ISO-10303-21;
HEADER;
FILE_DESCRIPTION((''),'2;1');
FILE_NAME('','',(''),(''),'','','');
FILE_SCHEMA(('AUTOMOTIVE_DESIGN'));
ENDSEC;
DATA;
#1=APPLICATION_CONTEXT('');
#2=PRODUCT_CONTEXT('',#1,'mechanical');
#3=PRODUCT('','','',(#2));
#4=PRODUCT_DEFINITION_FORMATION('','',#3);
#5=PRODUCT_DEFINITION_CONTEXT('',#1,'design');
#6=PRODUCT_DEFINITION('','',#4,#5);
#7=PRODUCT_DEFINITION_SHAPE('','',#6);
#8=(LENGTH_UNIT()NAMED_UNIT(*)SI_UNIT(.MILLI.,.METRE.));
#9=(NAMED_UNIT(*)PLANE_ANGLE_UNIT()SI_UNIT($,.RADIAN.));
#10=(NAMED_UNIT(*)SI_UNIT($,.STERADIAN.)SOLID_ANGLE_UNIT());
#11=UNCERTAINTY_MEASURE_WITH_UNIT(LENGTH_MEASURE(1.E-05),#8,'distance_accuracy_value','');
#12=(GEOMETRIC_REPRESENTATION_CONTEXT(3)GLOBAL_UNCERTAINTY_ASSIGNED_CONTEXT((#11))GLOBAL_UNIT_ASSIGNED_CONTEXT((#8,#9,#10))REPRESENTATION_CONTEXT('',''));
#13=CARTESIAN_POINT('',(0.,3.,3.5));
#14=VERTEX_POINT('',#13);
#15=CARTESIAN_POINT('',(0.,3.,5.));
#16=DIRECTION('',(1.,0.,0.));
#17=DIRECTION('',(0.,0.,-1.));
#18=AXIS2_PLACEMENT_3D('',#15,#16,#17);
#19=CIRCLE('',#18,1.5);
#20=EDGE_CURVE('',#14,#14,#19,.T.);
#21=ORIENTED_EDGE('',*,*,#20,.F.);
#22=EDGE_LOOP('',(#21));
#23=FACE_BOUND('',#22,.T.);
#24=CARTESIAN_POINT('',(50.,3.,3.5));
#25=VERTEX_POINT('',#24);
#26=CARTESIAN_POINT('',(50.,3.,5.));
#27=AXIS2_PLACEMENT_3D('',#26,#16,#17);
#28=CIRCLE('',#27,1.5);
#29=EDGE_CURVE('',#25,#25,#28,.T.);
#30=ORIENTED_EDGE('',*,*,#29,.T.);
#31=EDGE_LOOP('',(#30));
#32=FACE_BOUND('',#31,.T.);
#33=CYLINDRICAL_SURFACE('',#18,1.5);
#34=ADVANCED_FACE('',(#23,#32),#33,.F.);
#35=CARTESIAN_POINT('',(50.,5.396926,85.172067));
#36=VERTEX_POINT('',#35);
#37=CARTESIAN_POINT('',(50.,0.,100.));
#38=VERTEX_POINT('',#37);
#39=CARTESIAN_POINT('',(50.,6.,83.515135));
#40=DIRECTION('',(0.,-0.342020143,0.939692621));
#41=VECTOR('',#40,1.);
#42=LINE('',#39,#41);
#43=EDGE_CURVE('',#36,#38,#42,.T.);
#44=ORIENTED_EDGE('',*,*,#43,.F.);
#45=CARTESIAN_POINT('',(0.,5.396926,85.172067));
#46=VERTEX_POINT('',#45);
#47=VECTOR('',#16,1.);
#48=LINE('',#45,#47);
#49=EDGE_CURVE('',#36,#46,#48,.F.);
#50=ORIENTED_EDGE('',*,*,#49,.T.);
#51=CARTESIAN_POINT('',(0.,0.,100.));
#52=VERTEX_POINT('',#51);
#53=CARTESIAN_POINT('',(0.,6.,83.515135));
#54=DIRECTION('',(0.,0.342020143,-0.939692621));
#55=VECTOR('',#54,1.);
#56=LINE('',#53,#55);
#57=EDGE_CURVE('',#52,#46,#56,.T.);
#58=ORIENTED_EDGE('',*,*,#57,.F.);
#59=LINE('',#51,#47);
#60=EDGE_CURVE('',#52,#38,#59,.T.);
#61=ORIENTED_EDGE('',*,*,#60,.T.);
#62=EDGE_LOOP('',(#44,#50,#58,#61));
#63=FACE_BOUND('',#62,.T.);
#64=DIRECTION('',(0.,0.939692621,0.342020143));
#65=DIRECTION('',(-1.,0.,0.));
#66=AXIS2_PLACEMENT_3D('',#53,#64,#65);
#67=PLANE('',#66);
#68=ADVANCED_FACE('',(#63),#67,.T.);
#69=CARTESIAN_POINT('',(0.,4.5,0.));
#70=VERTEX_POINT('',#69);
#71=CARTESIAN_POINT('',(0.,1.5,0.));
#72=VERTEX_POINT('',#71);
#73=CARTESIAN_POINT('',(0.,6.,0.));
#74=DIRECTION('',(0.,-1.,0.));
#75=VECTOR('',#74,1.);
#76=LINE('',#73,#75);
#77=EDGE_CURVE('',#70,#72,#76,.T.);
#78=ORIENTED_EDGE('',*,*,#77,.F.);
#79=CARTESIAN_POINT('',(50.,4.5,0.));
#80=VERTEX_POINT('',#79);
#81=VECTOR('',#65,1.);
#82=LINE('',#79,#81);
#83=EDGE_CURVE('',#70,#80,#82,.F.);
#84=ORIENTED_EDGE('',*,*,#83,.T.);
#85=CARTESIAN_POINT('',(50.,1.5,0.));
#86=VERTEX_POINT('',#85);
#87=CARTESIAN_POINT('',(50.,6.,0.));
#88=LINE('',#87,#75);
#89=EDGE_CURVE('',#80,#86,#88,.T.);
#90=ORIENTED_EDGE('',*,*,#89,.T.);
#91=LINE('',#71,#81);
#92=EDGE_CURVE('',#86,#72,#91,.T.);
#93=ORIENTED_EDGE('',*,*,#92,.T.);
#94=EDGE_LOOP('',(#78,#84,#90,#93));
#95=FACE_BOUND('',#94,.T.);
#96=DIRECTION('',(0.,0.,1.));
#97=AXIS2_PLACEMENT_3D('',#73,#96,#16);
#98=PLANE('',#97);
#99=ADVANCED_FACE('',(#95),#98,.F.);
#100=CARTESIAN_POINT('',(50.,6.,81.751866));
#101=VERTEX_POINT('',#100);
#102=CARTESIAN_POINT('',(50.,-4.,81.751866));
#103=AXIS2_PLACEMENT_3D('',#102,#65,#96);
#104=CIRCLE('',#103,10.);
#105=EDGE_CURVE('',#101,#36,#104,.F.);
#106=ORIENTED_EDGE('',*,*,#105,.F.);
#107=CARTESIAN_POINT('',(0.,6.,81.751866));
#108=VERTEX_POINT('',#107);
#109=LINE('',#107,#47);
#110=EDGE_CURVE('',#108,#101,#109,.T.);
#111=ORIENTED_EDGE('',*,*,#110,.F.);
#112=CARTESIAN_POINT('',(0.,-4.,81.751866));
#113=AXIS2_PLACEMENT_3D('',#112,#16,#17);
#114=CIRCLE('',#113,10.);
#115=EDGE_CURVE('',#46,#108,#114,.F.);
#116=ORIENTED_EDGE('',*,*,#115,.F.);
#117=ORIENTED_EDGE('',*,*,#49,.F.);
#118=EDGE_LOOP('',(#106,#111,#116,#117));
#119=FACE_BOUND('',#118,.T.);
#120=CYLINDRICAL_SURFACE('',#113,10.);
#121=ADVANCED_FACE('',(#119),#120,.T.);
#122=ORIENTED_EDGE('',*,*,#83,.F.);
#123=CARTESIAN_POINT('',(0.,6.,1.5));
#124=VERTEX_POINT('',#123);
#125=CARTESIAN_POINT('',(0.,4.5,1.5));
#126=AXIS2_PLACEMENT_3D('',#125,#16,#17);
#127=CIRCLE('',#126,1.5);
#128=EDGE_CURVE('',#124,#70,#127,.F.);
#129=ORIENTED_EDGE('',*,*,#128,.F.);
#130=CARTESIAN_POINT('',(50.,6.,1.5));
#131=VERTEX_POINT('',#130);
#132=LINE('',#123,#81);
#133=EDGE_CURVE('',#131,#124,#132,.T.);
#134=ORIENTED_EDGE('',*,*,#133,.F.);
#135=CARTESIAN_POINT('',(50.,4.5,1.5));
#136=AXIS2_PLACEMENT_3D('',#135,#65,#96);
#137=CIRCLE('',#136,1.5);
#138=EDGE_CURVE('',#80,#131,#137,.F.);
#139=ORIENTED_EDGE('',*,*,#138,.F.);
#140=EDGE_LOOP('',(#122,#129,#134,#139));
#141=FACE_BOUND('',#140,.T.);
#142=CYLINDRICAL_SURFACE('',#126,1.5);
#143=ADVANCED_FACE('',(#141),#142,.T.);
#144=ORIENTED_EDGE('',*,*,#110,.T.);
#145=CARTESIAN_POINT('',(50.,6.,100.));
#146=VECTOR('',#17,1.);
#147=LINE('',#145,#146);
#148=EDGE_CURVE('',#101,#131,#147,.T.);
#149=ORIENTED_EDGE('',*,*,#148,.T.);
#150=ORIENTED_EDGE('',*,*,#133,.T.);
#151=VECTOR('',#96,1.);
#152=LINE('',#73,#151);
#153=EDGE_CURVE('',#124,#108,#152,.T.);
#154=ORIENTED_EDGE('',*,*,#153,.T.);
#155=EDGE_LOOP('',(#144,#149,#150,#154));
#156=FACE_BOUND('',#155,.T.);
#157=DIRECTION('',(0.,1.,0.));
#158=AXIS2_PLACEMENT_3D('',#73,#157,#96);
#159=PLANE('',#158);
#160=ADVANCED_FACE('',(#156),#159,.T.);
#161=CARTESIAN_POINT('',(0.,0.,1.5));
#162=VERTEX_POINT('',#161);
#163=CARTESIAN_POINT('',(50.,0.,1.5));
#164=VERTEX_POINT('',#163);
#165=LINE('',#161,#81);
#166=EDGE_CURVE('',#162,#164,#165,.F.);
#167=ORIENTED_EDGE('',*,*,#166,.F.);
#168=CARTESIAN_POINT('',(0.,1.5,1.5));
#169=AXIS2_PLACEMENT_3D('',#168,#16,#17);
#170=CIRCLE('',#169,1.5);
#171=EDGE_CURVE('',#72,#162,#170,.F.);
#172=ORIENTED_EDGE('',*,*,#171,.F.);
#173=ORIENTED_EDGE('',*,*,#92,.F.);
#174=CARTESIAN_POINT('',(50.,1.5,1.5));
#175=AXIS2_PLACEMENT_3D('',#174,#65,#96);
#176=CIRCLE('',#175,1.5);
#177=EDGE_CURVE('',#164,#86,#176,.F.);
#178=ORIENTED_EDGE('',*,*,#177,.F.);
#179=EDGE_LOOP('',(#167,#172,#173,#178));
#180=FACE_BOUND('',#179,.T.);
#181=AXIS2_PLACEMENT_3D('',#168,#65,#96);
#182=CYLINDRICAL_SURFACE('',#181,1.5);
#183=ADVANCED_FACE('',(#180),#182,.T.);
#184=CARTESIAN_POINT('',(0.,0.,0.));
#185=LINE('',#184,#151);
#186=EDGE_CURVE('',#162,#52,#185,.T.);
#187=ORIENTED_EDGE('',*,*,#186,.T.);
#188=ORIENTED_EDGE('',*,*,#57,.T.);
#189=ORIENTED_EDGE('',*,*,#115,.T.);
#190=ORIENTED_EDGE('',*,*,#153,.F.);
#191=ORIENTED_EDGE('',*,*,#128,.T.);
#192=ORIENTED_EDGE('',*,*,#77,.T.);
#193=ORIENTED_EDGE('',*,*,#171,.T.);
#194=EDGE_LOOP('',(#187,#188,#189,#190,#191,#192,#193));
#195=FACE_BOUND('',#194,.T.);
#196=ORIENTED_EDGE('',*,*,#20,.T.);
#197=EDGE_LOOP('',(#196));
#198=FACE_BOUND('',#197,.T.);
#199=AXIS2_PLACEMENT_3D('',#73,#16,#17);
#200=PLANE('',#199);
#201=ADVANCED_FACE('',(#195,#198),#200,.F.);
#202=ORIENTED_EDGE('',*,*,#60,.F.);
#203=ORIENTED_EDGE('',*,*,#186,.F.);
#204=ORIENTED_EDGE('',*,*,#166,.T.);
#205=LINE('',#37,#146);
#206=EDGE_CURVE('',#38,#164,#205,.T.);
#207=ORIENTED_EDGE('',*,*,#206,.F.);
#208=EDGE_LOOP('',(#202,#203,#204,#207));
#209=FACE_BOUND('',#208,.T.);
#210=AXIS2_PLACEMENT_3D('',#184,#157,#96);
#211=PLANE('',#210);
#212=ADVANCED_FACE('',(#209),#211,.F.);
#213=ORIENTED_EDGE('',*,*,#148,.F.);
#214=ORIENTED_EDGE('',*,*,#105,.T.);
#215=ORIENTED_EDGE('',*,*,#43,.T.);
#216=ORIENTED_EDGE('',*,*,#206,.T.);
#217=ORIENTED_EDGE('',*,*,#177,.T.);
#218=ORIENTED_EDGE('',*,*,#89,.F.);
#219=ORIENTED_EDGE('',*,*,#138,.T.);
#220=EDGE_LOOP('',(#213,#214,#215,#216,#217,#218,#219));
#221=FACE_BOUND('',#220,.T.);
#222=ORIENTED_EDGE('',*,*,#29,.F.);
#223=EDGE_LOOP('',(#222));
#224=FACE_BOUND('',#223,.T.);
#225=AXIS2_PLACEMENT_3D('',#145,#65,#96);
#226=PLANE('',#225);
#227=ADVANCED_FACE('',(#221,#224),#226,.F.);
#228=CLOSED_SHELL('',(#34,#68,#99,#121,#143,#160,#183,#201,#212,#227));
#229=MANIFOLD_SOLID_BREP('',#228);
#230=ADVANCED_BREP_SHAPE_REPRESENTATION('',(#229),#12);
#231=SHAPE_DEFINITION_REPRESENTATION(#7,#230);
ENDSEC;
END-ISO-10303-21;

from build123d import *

# Parameters (mm, degrees)
SKETCH1_W           = 50
SKETCH1_H           = 100
BOSS_EXTRUDE1_DEPTH = 6
SKETCH2_R           = 1.5
CUT_EXTRUDE1_DEPTH  = 112.964280018
FILLET2_R           = 1.5
CHAMFER1_SIZE2      = 16.484864517
CHAMFER1_SIZE       = 6
FILLET3_R           = 10


with BuildPart() as part:
    # Sketch1 → Boss-Extrude1 (new body)
    with BuildSketch(Plane(origin=(0, 0, 0), x_dir=(1, 0, 0), z_dir=(0, 1, 0))):
        with Locations((25, -50)):
            Rectangle(SKETCH1_W, SKETCH1_H)
    extrude(amount=BOSS_EXTRUDE1_DEPTH)

    # Sketch2 → Cut-Extrude1 (cut, through all)
    with BuildSketch(Plane(origin=(50, 0, 0), x_dir=(0, 0, -1), z_dir=(1, 0, 0))):
        with Locations((-5, 3)):
            Circle(SKETCH2_R)
    extrude(amount=-CUT_EXTRUDE1_DEPTH, mode=Mode.SUBTRACT)

    # Fillet2
    fillet2_edges = [part.edges().sort_by_distance(p)[0] for p in [
        (25, 6, 0),
        (25, 0, 0),
    ]]
    fillet(fillet2_edges, radius=FILLET2_R)

    # Chamfer1
    chamfer1_edges = [part.edges().sort_by_distance(p)[0] for p in [
        (25, 6, 100),
    ]]
    chamfer1_side = [part.faces().sort_by_distance(p)[0] for p in [
        (25, 5.88, 100),
    ]]
    chamfer(chamfer1_edges, length=CHAMFER1_SIZE - 0.0001, length2=CHAMFER1_SIZE2 - 0.0001, reference=chamfer1_side[0])  # a hair under: the kernel refuses the full size

    # Fillet3
    fillet3_edges = [part.edges().sort_by_distance(p)[0] for p in [
        (25, 6, 83.515235483),
    ]]
    fillet(fillet3_edges, radius=FILLET3_R)


solid = part.part
